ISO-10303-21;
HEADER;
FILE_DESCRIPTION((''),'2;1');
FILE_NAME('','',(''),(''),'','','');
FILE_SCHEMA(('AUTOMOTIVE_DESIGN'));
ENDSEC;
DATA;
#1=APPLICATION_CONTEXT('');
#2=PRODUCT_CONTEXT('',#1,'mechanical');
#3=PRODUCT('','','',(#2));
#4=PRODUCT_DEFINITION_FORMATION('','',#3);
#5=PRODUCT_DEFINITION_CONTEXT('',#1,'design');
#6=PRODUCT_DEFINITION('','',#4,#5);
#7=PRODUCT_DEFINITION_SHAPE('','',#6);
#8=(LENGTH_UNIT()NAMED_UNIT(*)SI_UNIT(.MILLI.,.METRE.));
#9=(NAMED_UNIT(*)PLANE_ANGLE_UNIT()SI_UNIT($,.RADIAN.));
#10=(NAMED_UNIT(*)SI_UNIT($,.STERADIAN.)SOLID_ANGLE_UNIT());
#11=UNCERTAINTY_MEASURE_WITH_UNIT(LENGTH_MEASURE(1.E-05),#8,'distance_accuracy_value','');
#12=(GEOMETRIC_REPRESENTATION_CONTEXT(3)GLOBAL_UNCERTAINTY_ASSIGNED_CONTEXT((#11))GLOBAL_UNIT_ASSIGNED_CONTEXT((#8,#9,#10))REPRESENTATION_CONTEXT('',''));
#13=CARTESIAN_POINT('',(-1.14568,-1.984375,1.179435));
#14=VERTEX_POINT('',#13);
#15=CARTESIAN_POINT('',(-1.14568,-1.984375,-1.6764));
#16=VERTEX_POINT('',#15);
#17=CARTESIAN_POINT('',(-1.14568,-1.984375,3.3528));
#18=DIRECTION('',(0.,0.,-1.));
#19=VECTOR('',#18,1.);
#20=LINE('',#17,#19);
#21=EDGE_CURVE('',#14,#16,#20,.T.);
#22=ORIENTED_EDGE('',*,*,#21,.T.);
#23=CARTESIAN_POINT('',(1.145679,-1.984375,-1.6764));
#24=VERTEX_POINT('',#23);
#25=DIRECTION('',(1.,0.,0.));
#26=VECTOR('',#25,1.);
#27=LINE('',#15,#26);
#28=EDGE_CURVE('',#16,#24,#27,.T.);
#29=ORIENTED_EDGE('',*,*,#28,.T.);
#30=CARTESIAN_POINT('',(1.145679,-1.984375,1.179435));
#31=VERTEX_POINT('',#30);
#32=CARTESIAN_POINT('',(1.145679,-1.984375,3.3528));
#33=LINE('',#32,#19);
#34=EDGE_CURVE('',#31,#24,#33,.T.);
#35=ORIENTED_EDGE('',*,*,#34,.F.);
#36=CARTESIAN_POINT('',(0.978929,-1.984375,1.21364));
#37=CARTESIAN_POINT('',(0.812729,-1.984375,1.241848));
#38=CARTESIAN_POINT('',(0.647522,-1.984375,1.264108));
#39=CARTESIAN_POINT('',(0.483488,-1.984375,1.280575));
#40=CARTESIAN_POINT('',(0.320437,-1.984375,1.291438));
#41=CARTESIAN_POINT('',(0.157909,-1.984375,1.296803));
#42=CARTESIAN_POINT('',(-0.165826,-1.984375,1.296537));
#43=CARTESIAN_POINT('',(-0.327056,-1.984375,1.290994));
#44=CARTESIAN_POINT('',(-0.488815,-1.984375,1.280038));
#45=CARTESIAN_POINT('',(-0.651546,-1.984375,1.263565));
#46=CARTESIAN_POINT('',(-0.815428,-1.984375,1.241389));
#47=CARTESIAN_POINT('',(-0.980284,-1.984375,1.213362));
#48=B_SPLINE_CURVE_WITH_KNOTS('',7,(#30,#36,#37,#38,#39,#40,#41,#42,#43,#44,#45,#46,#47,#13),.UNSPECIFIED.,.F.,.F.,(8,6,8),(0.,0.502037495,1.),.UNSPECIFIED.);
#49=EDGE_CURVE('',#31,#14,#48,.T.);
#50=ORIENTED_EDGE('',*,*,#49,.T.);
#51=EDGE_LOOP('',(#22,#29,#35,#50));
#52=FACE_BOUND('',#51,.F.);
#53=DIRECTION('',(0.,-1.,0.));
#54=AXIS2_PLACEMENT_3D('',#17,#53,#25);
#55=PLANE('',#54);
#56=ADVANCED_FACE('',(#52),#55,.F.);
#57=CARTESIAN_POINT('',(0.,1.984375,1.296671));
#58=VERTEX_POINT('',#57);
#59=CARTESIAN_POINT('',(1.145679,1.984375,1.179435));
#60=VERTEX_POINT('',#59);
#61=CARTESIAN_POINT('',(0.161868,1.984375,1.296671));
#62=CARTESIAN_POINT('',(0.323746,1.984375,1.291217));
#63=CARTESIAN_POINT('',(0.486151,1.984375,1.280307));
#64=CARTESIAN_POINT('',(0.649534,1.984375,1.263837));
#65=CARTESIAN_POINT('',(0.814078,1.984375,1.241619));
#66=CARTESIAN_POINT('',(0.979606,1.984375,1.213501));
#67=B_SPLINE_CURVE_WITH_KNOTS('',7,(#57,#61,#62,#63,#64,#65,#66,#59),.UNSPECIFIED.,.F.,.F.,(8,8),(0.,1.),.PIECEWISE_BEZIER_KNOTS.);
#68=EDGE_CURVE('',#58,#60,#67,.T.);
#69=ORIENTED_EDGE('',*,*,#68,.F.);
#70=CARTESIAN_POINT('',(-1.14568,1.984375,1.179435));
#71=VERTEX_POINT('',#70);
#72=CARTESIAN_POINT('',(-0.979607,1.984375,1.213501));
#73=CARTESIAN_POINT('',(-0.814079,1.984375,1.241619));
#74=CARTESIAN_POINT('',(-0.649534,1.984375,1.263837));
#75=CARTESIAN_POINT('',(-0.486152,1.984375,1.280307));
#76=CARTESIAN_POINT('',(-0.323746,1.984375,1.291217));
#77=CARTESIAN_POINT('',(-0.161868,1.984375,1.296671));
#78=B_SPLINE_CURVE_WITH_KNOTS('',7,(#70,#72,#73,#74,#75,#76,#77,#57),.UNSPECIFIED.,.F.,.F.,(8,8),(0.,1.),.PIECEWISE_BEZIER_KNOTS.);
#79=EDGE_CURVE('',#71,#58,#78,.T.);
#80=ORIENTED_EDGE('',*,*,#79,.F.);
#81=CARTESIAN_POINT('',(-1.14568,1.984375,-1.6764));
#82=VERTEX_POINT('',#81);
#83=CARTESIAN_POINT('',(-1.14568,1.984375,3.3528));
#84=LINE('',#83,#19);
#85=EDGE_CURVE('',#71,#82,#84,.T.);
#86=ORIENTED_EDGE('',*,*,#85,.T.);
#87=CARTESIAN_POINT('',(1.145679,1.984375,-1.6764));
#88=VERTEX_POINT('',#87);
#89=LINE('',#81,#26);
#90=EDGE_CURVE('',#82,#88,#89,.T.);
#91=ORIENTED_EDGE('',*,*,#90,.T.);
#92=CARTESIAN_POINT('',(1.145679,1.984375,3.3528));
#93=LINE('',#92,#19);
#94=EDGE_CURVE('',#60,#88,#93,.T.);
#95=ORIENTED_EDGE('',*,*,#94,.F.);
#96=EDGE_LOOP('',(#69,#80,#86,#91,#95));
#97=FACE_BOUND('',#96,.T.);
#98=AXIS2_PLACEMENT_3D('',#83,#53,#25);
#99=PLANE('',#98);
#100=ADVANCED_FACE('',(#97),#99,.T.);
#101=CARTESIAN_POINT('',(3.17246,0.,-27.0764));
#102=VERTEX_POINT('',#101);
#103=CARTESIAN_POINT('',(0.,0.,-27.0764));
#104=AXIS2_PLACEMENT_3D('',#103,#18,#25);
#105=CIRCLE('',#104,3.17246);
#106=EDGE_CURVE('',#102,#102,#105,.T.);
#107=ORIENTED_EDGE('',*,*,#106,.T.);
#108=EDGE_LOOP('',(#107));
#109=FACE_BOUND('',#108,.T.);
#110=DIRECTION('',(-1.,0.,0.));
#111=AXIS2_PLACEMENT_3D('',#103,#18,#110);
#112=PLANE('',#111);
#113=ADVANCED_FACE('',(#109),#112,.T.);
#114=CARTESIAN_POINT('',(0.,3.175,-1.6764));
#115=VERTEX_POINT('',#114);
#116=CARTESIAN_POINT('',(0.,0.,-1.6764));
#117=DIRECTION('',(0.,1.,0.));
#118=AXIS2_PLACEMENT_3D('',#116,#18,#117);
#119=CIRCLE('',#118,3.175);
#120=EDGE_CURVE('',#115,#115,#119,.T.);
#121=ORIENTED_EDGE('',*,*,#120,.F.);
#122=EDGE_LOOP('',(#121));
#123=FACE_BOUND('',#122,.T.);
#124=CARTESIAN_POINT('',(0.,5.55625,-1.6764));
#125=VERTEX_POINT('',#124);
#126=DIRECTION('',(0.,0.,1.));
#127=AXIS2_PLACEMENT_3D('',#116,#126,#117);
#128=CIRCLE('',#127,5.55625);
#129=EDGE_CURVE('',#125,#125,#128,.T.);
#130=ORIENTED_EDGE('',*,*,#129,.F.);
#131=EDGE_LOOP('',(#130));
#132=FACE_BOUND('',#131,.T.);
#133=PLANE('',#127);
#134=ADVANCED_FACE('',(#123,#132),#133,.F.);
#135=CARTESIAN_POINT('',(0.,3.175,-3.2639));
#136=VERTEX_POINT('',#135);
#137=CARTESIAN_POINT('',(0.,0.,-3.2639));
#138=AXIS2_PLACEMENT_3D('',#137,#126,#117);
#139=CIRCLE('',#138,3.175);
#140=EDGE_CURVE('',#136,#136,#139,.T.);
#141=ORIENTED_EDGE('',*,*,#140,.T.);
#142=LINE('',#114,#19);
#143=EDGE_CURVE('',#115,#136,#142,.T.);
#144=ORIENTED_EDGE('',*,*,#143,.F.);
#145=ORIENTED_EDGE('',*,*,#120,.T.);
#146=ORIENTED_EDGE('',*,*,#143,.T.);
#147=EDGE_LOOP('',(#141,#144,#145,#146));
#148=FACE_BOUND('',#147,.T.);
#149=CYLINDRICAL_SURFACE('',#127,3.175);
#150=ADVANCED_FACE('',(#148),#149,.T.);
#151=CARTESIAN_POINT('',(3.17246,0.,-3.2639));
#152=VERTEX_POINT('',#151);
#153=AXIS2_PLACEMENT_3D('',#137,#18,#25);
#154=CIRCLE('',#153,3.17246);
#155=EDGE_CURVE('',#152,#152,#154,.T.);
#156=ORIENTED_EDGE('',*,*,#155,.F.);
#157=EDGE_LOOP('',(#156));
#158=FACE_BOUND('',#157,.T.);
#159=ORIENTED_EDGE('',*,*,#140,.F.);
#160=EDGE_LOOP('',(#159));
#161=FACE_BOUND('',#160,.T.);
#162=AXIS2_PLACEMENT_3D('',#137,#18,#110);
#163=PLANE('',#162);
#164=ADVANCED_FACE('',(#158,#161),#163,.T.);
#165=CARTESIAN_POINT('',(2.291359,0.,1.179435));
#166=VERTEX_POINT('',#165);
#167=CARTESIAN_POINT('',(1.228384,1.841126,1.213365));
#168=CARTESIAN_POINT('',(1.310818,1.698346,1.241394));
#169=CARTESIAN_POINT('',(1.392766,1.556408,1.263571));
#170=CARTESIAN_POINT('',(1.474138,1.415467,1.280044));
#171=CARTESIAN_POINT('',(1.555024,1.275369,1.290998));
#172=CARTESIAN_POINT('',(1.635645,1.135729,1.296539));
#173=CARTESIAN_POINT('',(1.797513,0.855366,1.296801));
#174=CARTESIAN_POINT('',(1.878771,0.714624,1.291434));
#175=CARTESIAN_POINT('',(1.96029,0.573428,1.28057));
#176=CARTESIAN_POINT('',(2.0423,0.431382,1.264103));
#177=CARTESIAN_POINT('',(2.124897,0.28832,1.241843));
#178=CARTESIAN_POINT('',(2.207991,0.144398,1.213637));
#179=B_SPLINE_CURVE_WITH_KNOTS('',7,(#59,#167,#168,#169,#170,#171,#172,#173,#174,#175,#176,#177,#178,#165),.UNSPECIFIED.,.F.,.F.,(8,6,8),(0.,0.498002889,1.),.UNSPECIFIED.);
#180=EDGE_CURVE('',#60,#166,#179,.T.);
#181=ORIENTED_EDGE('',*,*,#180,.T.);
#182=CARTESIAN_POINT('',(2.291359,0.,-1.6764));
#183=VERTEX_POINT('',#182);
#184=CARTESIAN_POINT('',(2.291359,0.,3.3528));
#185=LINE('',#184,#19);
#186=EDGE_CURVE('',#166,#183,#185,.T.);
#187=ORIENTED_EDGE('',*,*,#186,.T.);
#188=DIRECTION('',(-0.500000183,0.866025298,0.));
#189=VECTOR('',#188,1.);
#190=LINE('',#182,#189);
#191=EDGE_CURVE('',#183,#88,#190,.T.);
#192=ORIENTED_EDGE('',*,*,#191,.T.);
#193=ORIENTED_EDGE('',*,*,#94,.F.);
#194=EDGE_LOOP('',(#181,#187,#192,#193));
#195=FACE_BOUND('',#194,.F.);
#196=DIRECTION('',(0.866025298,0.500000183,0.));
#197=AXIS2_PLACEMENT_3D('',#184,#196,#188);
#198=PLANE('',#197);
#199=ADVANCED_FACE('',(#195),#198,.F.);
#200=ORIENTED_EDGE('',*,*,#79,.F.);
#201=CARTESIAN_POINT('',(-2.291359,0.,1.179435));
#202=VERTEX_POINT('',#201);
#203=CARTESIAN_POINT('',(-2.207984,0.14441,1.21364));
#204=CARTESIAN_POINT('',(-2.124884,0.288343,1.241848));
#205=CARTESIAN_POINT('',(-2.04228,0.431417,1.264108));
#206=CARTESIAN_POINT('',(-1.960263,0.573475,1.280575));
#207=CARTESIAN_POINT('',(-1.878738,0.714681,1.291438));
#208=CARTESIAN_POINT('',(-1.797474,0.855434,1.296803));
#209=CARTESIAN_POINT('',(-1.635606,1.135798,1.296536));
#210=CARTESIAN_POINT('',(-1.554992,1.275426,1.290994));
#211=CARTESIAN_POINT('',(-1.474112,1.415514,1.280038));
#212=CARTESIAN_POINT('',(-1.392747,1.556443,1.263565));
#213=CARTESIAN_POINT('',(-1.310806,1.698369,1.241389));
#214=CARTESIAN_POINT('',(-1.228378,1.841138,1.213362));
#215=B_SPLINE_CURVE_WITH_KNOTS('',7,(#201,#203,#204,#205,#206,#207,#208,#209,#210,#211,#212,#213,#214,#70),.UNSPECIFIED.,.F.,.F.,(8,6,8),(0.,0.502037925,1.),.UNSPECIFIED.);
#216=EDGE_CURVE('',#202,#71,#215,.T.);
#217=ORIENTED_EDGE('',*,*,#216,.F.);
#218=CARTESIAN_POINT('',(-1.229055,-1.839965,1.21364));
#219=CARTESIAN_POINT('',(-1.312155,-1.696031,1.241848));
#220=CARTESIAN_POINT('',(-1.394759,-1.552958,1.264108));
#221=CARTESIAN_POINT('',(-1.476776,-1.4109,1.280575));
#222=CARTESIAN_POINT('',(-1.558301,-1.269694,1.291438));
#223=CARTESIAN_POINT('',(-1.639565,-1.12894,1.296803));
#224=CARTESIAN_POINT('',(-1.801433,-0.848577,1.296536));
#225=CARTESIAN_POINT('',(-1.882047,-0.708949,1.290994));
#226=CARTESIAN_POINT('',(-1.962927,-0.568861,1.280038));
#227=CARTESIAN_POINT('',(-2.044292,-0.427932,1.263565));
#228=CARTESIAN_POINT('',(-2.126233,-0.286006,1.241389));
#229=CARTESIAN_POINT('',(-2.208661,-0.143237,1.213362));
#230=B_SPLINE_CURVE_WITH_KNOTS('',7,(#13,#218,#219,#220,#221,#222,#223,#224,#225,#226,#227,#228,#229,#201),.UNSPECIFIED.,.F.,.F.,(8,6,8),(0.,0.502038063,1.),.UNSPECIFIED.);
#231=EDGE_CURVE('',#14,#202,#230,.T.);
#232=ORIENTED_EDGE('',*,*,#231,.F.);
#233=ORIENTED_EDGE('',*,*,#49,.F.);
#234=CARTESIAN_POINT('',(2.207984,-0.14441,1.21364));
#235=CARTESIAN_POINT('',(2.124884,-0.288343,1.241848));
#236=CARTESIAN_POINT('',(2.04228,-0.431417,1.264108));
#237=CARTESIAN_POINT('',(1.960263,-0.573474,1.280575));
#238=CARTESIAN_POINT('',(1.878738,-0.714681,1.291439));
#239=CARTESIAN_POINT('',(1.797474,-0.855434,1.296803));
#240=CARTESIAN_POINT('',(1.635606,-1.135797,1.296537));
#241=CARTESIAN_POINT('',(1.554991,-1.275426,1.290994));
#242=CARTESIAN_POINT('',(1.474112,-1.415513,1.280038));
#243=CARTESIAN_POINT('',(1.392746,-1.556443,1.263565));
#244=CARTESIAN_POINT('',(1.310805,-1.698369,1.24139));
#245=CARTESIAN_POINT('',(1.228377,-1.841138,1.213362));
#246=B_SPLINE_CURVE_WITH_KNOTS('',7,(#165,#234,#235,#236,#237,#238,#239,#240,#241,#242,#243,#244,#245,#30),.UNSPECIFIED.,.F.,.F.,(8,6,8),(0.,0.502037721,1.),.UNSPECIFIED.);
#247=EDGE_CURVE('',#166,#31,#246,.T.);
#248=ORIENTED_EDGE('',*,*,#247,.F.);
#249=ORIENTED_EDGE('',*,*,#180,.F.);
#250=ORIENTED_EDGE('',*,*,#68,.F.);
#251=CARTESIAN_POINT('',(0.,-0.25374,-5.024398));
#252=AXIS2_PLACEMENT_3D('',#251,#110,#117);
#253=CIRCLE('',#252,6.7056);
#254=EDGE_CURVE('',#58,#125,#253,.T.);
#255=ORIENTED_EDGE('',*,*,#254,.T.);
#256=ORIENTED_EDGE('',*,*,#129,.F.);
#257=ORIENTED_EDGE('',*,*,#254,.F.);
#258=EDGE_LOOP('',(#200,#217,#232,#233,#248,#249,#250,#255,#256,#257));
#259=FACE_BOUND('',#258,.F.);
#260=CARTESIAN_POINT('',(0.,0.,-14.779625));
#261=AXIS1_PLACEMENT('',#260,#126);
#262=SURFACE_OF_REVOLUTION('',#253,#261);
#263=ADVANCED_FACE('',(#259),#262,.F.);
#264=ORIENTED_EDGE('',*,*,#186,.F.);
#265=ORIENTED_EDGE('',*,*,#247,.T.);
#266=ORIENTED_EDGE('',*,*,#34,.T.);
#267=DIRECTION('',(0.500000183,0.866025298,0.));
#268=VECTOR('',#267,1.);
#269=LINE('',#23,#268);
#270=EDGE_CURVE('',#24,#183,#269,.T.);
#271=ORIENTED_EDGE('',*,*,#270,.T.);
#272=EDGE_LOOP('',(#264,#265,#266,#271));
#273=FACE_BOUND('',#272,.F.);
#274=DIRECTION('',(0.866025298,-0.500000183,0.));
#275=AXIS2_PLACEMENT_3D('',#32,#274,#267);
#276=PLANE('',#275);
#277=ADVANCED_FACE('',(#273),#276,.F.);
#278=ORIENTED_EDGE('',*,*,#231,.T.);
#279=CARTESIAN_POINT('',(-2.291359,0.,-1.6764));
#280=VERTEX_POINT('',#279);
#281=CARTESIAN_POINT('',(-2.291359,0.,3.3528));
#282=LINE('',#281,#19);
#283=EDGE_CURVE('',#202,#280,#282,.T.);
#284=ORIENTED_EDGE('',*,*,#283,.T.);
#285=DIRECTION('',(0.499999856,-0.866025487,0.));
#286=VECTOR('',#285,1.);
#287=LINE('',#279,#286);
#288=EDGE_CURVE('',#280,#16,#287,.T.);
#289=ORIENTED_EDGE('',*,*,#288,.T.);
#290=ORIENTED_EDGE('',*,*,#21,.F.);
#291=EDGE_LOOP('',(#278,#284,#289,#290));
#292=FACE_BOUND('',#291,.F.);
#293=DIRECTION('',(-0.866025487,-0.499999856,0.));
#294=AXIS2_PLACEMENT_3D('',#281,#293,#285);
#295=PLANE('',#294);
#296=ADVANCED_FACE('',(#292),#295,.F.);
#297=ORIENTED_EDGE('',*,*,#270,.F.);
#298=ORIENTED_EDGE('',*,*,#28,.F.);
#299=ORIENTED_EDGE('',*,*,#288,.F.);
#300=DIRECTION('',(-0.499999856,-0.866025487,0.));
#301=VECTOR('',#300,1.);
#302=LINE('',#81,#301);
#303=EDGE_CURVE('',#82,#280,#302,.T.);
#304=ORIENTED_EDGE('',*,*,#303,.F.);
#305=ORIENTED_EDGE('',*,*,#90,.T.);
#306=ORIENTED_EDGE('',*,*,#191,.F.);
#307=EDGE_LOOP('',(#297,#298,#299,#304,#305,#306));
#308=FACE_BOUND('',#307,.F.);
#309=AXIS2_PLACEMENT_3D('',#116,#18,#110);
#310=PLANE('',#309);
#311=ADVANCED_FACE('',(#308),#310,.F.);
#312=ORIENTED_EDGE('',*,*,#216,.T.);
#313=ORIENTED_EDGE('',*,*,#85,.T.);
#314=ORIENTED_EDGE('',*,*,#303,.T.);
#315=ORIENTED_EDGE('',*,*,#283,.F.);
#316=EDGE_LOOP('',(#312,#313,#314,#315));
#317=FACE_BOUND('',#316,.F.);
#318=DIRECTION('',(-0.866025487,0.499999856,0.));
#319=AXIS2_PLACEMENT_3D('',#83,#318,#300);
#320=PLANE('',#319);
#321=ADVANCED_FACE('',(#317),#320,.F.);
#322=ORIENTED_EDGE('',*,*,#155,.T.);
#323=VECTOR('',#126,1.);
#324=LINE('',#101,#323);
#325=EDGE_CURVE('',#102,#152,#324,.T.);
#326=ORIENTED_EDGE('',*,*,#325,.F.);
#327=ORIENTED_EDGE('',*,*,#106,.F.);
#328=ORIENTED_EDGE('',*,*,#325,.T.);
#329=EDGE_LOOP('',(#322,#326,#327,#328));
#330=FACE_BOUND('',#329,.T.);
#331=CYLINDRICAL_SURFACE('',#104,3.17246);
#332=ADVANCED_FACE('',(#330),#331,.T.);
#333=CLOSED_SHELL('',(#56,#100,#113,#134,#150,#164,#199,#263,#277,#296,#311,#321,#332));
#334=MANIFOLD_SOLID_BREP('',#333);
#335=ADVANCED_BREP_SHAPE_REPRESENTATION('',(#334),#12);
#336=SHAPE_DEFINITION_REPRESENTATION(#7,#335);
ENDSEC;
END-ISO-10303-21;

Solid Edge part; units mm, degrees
sketch "Sketch1" plane through (0, 0, 0) normal (1, 0, 0) x (0, 1, 0)
  line L0 (0, -1.6764) -> (0, 1.6764)
  arc A0 (0, 1.6764) -> (5.55625, -1.6764) centre (-0.25374, -5.024398) cw
  line L1 (0, -1.6764) -> (5.55625, -1.6764)
  dimension "D1" = 3.3528
  dimension "D2" = 6.7056
revolve "RevolvedProtrusion1" add sketch "Sketch1" angle 360 about axis through (0, 0, -14.779625) along (0, 0, 1)
sketch "Sketch2" plane through (0, 0, -1.6764) normal (0, 0, -1) x (0, 1, 0)
  circle A0 centre (0, 0) radius 3.175
  dimension "D1" = 6.35
extrude "Protrusion1" add sketch "Sketch2" along normal blind 25.4
sketch "Sketch3" plane through (0, 0, -27.0764) normal (0, 0, -1) x (1, 0, 0)
  circle A0 centre (0, 0) radius 3.17246
  dimension "D1" = 0.0025
extrude "Cutout1" cut sketch "Sketch3" against normal blind 23.8125 flip side to cut
sketch "Sketch4" plane through (-0.603226, 0.360624, 3.3528) normal (0, 0, 1) x (1, 0, 0)
  line L0 (-0.542454, 1.623751) -> (1.748905, 1.623751)
  line L1 (2.894585, -0.360624) -> (1.748905, 1.623751)
  line L2 (1.748905, -2.344999) -> (2.894585, -0.360624)
  line L3 (-0.542454, -2.344999) -> (1.748905, -2.344999)
  line L4 (-1.688133, -0.360624) -> (-0.542454, -2.344999)
  line L5 (-0.542454, 1.623751) -> (-1.688133, -0.360624)
extrude "ExtrudedCutout_11" cut sketch "Sketch4" against normal blind 5.0292
properties part number "24103363"
